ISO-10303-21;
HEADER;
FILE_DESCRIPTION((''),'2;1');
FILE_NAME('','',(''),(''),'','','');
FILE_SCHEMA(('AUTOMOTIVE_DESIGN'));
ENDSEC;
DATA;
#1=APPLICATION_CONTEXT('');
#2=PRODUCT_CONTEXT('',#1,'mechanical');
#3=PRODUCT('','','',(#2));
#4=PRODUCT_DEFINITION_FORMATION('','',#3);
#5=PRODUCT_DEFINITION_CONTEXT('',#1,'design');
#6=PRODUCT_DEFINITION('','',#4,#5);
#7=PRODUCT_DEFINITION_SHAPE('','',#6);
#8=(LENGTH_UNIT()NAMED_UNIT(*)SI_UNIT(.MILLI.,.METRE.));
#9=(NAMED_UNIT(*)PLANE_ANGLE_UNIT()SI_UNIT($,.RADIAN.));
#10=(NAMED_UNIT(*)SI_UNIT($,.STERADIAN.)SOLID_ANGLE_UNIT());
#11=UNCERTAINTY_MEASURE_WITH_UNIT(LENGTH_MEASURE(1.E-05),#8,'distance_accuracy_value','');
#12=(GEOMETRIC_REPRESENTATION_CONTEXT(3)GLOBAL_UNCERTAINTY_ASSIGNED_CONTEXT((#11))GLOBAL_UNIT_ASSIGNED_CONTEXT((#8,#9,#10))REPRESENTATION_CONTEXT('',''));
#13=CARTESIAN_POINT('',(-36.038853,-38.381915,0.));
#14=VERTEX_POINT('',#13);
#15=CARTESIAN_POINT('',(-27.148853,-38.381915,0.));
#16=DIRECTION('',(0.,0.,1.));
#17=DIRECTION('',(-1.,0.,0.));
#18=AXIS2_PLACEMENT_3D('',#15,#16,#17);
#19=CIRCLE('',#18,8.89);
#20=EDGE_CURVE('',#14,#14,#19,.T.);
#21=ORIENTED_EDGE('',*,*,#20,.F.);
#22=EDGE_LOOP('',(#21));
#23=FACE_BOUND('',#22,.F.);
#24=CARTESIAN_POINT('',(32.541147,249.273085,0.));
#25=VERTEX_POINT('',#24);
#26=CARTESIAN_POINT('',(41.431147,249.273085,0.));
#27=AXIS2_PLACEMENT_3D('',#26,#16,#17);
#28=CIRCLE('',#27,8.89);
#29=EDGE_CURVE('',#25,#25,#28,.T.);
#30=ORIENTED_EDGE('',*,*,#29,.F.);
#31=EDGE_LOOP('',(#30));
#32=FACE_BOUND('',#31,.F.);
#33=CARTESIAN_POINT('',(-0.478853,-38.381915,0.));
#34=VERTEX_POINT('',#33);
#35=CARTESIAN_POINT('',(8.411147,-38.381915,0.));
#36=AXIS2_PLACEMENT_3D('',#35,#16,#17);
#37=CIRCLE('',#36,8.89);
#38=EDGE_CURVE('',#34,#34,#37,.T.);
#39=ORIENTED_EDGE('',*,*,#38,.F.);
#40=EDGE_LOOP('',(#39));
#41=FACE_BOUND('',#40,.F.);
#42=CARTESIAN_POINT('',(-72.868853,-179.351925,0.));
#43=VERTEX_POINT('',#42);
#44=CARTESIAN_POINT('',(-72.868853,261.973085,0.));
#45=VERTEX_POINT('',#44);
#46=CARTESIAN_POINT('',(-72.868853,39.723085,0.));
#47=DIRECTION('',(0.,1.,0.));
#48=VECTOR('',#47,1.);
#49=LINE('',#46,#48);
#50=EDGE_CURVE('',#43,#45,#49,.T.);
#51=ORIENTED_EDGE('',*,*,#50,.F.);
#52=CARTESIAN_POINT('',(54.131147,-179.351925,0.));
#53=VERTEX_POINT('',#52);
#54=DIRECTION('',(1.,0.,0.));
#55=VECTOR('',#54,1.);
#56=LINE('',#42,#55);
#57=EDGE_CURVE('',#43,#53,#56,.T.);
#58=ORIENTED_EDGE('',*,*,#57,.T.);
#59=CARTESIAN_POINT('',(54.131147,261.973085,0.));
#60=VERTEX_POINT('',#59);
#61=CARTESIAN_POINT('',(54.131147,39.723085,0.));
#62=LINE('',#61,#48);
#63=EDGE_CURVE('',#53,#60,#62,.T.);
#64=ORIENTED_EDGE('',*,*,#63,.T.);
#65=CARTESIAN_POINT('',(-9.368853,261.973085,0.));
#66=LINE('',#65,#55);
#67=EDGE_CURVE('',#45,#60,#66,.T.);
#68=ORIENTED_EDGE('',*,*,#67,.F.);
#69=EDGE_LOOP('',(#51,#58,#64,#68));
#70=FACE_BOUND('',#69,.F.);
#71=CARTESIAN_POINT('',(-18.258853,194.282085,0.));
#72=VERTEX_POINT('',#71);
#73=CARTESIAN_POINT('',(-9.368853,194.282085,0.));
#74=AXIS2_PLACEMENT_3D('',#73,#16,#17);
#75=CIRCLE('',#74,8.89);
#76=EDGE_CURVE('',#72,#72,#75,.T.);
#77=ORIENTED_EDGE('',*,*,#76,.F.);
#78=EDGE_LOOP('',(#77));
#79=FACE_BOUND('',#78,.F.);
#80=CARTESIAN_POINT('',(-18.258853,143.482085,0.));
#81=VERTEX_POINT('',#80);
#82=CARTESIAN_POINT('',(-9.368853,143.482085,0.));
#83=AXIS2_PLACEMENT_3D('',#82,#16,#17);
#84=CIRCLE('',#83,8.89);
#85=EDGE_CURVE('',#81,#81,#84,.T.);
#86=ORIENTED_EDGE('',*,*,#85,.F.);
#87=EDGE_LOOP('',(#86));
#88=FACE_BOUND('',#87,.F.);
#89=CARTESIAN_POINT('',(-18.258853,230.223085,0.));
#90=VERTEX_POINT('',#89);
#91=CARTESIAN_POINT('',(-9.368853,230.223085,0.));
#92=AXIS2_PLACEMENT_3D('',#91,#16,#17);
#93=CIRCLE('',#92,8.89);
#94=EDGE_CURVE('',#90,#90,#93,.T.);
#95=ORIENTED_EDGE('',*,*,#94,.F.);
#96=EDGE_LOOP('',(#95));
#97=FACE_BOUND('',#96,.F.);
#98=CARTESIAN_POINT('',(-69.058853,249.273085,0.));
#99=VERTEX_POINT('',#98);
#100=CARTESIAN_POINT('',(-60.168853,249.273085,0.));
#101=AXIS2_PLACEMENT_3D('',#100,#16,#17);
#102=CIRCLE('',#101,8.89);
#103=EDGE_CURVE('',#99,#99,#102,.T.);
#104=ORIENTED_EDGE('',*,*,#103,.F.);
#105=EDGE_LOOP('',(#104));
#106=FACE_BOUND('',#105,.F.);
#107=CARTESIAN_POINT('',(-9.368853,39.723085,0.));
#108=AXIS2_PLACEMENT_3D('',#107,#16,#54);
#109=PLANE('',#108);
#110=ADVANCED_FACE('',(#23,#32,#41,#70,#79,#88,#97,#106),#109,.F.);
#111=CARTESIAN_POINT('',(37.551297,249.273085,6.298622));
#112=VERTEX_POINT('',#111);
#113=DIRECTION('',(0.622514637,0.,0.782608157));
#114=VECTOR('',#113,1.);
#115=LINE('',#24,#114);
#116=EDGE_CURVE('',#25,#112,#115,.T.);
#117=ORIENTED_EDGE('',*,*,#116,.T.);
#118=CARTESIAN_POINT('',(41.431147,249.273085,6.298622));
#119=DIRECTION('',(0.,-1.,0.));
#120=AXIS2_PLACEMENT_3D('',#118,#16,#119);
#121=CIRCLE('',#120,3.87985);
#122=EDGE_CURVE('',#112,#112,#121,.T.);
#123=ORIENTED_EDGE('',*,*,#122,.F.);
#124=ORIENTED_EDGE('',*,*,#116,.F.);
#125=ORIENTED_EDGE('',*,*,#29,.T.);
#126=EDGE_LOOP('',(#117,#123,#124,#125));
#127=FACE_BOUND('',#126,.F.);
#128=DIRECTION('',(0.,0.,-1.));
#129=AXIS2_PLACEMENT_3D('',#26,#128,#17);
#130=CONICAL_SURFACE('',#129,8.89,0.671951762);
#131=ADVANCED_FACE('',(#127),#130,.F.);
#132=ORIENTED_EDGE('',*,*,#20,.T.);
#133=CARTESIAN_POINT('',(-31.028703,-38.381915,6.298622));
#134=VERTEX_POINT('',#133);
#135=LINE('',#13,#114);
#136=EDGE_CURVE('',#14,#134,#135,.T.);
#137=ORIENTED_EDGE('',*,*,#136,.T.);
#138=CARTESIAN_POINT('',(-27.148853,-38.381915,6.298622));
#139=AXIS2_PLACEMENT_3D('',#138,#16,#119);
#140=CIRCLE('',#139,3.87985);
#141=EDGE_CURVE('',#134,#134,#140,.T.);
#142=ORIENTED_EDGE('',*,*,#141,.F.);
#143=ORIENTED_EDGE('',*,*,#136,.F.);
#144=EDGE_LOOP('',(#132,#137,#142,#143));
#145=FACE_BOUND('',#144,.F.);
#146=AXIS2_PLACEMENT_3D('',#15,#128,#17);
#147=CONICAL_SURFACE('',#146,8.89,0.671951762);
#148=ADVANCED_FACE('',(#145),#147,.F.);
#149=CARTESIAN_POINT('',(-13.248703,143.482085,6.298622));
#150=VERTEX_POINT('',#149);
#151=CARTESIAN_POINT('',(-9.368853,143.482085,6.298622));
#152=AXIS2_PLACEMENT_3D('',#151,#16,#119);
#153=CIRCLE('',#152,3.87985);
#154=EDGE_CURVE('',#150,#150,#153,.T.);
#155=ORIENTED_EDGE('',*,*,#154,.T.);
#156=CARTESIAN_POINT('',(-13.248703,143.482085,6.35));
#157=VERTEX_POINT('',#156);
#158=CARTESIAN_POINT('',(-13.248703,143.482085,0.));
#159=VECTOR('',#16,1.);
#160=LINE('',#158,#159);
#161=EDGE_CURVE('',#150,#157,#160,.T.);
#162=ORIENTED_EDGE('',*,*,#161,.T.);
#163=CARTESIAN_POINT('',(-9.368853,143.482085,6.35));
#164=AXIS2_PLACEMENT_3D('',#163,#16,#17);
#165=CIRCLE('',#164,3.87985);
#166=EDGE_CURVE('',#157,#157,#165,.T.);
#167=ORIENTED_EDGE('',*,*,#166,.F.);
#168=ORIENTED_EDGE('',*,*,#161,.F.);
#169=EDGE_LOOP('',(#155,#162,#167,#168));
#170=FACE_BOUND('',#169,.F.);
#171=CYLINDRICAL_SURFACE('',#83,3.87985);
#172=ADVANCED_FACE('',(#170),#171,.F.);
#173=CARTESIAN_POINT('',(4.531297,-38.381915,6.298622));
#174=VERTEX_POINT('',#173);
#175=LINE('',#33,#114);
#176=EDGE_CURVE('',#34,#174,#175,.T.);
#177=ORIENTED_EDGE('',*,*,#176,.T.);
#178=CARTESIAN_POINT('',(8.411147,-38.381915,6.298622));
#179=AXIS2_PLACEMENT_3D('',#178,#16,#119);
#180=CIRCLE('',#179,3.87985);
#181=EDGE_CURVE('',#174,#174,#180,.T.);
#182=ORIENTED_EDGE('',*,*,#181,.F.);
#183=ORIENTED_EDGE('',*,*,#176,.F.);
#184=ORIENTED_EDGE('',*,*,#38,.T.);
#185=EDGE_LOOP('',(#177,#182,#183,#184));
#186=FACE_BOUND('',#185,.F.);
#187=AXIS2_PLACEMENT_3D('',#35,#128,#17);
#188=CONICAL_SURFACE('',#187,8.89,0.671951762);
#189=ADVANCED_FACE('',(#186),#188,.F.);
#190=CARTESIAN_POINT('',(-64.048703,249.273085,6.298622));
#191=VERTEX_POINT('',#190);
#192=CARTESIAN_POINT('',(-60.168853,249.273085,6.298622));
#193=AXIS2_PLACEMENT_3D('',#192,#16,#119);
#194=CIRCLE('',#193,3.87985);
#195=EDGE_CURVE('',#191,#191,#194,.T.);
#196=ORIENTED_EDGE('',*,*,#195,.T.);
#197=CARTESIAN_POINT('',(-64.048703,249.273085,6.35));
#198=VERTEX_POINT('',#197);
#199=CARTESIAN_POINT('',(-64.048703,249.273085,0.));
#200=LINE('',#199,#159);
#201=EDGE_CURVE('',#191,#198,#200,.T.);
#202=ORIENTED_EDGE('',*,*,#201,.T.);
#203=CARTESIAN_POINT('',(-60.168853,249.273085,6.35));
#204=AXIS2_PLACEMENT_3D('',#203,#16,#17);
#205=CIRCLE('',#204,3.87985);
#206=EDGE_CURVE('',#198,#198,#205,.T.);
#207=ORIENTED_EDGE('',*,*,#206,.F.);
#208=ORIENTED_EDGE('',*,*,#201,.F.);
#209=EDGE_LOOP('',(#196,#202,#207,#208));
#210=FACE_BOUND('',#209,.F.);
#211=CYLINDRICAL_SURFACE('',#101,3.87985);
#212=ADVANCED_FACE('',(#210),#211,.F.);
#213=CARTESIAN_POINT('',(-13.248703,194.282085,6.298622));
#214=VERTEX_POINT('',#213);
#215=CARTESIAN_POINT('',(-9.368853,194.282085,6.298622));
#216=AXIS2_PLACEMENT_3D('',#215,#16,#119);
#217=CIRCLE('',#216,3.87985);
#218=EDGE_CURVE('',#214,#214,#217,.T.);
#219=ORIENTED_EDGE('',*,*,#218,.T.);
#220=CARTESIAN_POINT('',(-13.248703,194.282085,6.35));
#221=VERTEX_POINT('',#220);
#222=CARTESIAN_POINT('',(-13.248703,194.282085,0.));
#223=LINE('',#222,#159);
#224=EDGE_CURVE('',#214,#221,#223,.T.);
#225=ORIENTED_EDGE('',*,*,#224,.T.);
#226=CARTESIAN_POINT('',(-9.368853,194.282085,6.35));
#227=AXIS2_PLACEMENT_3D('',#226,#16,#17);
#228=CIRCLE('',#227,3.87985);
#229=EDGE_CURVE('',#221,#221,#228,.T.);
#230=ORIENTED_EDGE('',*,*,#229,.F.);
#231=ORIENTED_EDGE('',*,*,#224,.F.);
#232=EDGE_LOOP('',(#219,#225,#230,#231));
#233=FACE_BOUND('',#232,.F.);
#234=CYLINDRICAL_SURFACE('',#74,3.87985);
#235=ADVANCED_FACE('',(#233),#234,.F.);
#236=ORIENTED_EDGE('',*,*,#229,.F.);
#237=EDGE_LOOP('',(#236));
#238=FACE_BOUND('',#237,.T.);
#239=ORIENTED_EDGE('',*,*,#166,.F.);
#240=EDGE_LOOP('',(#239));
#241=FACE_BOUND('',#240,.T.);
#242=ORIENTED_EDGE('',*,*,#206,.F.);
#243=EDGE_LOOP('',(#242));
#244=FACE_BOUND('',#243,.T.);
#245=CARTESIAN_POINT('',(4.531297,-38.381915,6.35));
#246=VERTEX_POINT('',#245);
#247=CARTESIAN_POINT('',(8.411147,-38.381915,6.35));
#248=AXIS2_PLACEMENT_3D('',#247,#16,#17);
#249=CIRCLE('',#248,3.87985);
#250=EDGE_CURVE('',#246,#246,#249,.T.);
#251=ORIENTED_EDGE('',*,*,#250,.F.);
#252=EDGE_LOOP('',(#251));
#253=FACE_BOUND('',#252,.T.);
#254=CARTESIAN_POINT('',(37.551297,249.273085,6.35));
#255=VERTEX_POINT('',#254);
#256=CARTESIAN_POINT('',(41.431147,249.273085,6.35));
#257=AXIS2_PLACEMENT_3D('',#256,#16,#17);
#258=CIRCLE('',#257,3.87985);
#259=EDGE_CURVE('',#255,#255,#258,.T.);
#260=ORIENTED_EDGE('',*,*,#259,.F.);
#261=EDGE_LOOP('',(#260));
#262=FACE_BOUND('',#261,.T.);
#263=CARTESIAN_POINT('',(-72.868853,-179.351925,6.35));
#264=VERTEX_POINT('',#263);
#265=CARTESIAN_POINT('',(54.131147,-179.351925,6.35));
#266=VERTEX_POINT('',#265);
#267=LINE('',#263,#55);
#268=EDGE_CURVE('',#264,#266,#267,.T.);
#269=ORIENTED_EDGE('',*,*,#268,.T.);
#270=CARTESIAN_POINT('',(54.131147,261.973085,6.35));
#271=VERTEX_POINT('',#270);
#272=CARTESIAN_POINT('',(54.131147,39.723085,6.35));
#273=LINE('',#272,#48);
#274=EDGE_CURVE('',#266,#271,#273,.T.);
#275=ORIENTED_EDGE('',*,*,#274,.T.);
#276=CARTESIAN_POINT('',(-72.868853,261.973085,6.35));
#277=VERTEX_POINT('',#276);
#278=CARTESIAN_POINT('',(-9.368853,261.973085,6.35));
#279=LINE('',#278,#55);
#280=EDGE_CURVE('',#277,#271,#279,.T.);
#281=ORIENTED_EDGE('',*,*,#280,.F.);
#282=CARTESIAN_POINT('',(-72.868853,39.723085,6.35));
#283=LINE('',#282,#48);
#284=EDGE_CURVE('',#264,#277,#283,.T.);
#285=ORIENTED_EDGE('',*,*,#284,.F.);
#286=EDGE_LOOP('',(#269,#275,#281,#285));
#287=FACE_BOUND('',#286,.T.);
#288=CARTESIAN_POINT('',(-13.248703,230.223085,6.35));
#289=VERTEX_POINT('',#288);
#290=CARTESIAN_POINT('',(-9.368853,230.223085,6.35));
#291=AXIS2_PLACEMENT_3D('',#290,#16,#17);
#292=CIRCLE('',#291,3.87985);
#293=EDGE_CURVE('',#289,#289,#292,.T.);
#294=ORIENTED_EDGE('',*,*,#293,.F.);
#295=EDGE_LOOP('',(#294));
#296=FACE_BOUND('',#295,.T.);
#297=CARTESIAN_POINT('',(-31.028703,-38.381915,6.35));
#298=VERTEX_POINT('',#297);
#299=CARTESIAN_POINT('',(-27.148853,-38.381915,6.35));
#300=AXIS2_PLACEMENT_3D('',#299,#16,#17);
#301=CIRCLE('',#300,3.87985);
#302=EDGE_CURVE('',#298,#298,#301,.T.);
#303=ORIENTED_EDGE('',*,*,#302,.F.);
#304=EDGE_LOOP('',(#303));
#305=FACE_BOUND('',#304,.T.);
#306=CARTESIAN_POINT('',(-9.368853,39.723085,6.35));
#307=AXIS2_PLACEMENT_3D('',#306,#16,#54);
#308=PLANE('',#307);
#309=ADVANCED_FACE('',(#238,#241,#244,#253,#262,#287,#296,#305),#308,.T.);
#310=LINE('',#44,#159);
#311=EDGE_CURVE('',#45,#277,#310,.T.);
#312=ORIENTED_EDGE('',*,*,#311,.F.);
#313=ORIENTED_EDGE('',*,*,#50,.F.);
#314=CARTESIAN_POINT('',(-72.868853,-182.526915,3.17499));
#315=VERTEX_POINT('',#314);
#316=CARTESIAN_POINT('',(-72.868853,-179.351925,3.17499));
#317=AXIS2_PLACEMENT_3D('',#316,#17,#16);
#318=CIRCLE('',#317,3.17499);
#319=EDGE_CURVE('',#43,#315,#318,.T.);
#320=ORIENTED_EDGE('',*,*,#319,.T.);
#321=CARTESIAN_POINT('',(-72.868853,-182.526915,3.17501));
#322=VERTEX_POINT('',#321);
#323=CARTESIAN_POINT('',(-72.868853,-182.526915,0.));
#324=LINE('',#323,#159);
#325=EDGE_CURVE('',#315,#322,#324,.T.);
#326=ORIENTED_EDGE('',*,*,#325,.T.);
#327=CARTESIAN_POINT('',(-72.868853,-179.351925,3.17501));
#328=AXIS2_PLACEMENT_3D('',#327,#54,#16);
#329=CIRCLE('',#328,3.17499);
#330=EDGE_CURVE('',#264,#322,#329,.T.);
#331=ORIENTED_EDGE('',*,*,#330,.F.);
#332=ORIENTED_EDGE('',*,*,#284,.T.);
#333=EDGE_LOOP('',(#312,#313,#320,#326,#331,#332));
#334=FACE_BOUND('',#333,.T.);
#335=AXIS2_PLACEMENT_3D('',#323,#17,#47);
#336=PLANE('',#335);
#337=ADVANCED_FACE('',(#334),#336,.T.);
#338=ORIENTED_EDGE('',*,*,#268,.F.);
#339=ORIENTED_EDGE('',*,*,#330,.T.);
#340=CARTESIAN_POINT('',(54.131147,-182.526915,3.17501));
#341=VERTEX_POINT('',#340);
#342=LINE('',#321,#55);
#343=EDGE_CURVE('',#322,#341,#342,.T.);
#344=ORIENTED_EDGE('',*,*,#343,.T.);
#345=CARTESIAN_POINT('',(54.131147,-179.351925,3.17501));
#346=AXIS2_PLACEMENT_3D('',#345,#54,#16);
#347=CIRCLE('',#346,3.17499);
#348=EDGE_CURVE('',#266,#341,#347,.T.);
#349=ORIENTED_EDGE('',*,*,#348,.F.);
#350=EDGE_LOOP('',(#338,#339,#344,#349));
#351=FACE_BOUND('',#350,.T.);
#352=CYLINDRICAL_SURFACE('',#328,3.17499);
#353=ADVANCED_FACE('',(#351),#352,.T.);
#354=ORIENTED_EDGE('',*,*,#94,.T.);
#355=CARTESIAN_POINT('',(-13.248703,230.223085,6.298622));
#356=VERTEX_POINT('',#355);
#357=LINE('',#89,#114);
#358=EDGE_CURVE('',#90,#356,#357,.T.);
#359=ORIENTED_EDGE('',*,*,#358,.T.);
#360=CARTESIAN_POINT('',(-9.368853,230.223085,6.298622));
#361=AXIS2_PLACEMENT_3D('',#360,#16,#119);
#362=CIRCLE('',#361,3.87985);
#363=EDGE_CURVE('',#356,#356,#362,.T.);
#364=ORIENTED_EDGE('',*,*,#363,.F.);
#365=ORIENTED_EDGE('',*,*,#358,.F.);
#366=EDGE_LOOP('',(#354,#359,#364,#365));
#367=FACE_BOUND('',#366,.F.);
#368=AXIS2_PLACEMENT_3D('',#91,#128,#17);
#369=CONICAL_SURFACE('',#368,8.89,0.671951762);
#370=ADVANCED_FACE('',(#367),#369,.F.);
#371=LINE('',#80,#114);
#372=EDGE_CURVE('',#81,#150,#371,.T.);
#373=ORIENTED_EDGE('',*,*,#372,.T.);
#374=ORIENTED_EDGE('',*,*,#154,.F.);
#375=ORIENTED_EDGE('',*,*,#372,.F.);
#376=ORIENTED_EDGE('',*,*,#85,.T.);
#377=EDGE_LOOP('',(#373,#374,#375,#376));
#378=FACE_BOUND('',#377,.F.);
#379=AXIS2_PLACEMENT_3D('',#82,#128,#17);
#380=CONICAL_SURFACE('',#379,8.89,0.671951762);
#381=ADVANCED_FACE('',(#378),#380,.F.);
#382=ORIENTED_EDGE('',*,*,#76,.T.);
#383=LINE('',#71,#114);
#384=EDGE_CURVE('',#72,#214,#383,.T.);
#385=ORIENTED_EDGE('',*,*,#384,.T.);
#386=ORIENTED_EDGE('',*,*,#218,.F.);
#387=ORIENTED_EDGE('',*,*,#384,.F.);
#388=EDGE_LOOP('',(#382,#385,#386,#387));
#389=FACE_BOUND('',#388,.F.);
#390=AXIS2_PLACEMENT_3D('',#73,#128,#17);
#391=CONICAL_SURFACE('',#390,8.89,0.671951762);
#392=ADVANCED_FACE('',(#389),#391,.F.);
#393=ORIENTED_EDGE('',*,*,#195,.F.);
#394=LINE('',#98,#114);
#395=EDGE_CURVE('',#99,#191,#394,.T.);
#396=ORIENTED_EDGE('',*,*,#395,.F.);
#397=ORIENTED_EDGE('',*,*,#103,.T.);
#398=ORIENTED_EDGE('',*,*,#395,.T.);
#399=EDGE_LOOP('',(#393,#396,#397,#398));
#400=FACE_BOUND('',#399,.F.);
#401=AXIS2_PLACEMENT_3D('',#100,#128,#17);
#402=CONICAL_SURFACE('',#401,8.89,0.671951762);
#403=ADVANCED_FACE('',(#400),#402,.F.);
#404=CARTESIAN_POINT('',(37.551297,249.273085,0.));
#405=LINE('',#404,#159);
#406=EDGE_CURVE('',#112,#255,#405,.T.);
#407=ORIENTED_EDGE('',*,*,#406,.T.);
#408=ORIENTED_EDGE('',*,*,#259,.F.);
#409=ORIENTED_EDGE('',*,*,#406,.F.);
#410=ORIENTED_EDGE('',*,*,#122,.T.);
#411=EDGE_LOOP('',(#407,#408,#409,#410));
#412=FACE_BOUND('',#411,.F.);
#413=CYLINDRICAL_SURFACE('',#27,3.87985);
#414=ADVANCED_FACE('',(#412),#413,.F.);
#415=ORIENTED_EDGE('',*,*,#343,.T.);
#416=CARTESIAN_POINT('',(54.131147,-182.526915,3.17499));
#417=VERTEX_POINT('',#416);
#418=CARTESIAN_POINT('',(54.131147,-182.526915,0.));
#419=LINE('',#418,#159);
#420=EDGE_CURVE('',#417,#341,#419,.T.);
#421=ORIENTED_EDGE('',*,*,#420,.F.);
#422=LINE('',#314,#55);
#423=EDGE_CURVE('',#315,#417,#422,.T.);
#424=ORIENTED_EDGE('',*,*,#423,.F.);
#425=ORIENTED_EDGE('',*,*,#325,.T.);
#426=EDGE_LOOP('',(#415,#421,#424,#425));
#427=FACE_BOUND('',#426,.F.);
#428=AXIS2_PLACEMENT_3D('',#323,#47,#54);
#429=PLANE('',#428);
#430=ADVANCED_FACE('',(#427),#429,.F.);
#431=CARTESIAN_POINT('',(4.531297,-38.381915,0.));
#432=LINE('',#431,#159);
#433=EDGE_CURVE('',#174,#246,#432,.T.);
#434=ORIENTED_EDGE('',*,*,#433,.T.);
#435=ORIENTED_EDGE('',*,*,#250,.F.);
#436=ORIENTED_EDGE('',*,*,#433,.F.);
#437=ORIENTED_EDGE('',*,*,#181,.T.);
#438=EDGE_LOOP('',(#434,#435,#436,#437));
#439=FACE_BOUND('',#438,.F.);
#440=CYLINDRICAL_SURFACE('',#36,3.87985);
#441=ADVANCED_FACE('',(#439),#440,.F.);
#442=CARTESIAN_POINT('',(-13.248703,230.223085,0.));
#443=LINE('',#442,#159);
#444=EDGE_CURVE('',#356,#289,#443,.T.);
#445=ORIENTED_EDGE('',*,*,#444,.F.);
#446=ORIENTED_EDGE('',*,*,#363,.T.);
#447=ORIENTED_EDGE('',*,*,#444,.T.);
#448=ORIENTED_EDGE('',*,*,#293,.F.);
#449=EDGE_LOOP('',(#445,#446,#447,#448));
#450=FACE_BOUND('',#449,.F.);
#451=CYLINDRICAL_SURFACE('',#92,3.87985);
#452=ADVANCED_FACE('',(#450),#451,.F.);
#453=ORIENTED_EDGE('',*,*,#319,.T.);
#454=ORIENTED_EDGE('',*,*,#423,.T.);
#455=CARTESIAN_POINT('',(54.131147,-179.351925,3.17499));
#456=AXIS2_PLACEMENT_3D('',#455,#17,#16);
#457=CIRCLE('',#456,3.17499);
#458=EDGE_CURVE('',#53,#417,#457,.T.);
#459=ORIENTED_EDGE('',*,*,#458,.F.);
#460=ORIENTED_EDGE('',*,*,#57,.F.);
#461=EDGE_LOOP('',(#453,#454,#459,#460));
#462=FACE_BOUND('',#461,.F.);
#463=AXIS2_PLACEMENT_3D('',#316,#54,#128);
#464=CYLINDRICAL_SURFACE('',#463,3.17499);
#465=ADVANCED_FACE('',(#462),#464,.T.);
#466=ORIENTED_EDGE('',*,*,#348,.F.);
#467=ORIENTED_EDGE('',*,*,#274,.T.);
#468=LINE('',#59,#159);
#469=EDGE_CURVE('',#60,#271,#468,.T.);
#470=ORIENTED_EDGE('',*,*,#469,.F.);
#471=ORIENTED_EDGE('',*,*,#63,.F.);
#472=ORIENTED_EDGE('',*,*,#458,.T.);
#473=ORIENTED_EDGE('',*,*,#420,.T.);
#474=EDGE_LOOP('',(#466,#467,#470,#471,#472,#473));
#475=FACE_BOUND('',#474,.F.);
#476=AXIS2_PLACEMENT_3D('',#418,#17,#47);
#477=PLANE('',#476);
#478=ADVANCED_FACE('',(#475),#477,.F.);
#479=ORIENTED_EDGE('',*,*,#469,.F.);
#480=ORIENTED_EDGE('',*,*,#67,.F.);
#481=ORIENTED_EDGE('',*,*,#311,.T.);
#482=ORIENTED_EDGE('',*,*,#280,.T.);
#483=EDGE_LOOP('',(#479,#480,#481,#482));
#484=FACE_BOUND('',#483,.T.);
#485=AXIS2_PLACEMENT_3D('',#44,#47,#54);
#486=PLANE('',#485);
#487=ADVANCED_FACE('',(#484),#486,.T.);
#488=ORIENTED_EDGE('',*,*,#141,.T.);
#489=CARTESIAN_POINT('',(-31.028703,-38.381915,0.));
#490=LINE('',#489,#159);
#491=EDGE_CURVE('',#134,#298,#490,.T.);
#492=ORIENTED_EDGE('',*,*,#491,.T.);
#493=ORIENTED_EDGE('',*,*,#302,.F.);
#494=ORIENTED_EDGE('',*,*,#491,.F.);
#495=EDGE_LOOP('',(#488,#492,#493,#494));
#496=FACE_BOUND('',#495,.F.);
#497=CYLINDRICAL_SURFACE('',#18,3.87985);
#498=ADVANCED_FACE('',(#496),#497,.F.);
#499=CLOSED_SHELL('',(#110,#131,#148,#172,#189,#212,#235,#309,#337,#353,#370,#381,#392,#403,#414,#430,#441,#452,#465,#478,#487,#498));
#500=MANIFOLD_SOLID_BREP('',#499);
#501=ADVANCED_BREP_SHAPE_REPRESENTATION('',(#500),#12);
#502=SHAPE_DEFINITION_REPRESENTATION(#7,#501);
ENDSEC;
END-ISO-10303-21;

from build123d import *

# Parameters (mm, degrees)
F0_W           = 127
F0_H           = 444.5
F1_DEPTH       = 6.35
F4_D           = 7.7597
F4_DEPTH       = 9.525
F4_CSINK_D     = 17.78
F4_CSINK_ANGLE = 77
F4_TIP         = 2.3312490727
F5_R           = 3.17499


# Not quite as in the source:
# - a fillet or chamfer is up to 0.001 mm smaller than in the source, because OpenCascade refuses the exact size


with BuildPart() as f1:
    # F0 (on Top) → F1 (new body)
    with BuildSketch(Plane.XY):
        with Locations((-9.3688531779, 39.7230851987)):
            Rectangle(F0_W, F0_H)
    extrude(amount=F1_DEPTH)

    # F4
    with Locations(Plane(origin=(0, 0, 0), x_dir=(1, 0, 0), z_dir=(0, 0, -1))):
        with Locations((41.4311468221, -249.2730851987), (-9.3688531779, -230.2230851987), (-60.1688531779, -249.2730851987), (-9.3688531779, -194.2820851987), (-9.3688531779, -143.4820851987), (8.4111468221, 38.3819148013), (-27.1488531779, 38.3819148013)):
            CounterSinkHole(F4_D / 2, F4_CSINK_D / 2, depth=F4_DEPTH, counter_sink_angle=F4_CSINK_ANGLE)
            with Locations((0, 0, -(F4_DEPTH + F4_TIP / 2))):  # 118° drill point
                Cone(0, F4_D / 2, F4_TIP, mode=Mode.SUBTRACT)

    # F5 (radius 3.175 in the source; OpenCascade refuses exactly that, so slightly less here)
    f5_edges = [f1.edges().sort_by_distance(p)[0] for p in [
        (-9.368853, -182.526915, 6.35),
        (-9.368853, -182.526915, 0),
    ]]
    fillet(f5_edges, radius=F5_R)


solid = f1.part
